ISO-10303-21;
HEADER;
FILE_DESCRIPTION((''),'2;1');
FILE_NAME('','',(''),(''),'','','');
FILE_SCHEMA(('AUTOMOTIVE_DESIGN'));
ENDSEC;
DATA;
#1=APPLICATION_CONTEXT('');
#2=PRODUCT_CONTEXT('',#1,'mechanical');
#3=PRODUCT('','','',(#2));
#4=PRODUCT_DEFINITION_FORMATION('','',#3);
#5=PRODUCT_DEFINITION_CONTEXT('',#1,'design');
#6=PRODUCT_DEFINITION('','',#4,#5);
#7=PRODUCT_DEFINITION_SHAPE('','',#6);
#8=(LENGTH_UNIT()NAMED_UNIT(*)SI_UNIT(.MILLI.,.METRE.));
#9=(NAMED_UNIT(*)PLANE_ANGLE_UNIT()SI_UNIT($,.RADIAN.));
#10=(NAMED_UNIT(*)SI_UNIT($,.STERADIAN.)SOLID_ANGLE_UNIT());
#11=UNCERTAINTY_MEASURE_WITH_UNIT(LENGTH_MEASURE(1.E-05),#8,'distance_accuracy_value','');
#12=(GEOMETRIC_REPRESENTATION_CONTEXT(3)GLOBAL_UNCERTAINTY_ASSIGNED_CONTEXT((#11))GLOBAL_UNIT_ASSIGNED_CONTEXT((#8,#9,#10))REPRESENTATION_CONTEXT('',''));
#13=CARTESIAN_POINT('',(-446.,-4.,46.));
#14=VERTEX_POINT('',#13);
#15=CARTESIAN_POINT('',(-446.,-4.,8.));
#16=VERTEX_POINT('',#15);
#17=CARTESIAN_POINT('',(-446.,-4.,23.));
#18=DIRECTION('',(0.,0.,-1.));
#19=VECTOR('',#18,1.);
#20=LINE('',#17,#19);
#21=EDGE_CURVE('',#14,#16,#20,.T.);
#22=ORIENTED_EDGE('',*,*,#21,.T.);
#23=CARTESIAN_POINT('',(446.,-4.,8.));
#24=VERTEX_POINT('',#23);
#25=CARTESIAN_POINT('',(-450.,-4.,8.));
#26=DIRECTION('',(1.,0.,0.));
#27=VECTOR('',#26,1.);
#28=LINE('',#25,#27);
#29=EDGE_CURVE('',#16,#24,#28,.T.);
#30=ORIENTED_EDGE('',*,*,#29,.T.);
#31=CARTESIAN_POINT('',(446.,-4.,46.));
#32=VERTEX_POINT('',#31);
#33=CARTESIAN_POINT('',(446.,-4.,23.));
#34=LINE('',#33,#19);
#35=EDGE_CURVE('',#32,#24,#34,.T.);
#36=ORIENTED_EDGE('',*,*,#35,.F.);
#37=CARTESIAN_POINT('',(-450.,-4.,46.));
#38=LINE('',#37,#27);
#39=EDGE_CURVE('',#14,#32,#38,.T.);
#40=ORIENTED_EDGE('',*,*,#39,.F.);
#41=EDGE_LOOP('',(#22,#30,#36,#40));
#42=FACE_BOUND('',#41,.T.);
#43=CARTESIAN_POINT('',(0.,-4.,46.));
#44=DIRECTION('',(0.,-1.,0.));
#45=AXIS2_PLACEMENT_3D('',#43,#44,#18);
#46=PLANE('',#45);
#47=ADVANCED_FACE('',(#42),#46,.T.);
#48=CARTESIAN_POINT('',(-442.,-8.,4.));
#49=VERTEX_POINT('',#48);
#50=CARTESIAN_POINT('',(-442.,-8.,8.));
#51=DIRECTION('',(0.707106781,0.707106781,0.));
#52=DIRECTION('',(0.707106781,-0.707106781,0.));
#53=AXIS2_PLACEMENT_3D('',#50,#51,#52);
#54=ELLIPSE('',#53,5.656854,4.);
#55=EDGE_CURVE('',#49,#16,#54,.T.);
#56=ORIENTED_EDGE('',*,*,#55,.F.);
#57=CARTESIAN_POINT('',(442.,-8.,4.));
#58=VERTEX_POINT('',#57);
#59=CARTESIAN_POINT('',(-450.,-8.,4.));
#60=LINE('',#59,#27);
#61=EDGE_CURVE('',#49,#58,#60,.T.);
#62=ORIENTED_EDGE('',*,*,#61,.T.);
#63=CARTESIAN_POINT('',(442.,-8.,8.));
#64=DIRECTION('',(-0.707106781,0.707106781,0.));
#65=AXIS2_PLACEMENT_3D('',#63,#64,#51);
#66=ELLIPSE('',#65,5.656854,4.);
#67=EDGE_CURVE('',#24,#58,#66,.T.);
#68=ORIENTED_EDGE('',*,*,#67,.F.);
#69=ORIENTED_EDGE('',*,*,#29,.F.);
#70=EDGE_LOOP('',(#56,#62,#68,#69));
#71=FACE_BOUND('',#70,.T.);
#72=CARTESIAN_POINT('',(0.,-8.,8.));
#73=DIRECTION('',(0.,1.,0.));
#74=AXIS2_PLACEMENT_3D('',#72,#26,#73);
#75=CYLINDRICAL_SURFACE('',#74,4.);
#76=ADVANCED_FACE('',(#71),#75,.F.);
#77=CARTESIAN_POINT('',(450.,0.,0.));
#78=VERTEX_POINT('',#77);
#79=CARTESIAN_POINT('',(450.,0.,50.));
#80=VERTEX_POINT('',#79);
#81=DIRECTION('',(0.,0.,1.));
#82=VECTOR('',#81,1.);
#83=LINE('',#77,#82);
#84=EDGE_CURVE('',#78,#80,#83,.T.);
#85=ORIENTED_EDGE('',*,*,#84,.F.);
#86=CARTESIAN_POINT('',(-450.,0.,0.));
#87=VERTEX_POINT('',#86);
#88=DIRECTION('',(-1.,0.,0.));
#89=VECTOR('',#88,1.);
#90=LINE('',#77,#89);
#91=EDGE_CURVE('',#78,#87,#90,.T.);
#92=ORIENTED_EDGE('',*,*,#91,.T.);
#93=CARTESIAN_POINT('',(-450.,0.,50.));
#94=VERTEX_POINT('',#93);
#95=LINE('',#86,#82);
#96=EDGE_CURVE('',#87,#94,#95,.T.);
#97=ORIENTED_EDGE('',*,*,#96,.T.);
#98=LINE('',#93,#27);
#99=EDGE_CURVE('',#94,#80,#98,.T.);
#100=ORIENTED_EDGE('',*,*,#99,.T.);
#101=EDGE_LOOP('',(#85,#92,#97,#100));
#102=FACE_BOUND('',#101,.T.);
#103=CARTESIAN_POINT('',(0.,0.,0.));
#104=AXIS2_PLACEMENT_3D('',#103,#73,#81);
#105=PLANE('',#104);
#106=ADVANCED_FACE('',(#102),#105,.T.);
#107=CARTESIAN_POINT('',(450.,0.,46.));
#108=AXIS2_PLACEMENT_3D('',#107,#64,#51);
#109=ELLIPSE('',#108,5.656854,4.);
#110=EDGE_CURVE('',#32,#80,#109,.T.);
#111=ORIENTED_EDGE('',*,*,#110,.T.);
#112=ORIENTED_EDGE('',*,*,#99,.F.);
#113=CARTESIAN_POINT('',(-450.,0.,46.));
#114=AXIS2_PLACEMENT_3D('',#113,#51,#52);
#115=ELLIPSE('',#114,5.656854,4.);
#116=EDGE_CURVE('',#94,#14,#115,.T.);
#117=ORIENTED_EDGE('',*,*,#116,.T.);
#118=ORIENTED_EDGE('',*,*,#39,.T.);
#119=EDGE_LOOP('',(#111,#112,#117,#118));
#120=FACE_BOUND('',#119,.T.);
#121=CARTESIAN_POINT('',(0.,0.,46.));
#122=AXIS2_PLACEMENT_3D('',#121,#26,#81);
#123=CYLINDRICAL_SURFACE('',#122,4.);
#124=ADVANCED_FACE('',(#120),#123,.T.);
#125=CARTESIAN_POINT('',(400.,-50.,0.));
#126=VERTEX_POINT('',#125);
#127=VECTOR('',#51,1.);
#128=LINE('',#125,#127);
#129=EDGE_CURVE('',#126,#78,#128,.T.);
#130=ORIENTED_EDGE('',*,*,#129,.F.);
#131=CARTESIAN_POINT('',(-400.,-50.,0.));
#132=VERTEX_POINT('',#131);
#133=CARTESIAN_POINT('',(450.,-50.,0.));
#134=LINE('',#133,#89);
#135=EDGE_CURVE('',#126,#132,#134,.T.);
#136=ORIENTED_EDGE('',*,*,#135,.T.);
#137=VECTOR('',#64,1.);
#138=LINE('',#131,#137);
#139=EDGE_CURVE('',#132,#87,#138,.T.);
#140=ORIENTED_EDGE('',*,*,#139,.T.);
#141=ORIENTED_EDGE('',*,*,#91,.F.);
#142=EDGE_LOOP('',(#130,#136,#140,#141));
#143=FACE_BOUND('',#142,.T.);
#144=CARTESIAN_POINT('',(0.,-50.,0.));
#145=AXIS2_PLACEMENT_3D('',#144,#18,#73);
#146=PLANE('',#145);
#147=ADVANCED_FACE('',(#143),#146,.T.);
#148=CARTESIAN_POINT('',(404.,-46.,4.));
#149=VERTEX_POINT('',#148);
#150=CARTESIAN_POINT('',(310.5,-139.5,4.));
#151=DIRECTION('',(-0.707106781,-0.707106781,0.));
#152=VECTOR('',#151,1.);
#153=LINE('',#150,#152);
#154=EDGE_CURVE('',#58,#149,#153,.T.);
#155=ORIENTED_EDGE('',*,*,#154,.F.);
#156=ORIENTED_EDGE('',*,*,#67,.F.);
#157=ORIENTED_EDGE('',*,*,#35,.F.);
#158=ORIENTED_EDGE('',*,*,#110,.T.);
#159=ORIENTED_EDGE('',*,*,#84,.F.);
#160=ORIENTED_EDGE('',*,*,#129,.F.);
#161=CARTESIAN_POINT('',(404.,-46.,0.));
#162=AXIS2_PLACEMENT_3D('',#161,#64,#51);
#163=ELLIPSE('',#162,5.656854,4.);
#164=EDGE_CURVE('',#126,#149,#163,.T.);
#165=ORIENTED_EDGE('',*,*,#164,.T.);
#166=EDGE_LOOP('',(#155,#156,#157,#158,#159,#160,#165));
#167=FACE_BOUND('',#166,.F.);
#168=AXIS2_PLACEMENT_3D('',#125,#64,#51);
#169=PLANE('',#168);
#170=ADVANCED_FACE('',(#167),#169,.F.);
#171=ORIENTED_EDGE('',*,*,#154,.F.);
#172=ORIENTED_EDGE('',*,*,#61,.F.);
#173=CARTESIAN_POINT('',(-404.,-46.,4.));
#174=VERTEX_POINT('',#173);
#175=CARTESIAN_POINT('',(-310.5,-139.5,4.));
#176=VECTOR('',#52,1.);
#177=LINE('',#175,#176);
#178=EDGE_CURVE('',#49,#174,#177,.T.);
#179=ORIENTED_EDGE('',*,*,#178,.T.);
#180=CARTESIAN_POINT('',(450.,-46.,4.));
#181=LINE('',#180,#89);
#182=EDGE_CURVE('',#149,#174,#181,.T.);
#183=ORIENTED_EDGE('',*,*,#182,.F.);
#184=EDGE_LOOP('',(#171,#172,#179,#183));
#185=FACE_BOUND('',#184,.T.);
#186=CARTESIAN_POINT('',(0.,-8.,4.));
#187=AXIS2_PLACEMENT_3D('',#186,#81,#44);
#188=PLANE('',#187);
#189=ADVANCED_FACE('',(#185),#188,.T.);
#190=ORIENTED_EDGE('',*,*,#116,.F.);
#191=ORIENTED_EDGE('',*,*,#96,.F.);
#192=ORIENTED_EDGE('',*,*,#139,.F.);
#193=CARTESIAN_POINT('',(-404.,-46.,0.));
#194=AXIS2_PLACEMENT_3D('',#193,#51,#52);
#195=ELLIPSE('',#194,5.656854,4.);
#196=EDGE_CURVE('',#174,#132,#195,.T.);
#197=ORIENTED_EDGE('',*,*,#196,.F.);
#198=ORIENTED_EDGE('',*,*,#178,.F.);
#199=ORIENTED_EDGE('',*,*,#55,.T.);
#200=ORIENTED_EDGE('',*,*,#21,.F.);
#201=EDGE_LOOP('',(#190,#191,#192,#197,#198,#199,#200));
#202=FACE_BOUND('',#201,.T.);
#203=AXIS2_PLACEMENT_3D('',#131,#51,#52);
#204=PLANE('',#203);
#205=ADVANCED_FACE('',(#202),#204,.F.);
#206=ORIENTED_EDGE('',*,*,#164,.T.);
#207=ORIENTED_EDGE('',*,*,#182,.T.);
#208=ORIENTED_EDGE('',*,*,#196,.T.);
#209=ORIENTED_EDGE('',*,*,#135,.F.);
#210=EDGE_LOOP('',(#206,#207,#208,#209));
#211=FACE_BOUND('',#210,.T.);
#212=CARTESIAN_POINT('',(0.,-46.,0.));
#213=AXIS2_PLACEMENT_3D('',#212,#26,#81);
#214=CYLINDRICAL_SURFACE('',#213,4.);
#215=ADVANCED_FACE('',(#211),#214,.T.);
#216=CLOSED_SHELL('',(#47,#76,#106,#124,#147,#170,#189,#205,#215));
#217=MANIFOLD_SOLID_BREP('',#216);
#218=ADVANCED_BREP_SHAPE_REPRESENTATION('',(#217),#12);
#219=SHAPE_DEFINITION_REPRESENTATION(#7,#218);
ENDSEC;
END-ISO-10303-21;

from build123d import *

# Parameters (mm, degrees)
F1_DEPTH = 450
F3_DEPTH = 50.001


# Not quite as in the source:
# - a pattern or mirror of a feature is missing from the dataset's text; its kind, count and spacing are read off the source's solid


with BuildPart() as f1:
    # F0 (on Right) → F1 (new body, symmetric)
    with BuildSketch(Plane.YZ):
        with BuildLine():
            Line((0, 0), (0, 50))
            ThreePointArc((0, 50), (-2.8284271247, 48.8284271247), (-4, 46))
            Line((-4, 46), (-4, 8))
            ThreePointArc((-4, 8), (-5.1715728753, 5.1715728753), (-8, 4))
            Line((-8, 4), (-46, 4))
            ThreePointArc((-46, 4), (-48.8284271247, 2.8284271247), (-50, 0))
            Line((-50, 0), (0, 0))
        make_face()
    extrude(amount=F1_DEPTH, both=True)

    # F2 (on face) → F3 (cut, through all)
    with BuildSketch(Plane(origin=(0, 0, 0), x_dir=(1, 0, 0), z_dir=(0, 0, -1))):
        Polygon((400, 50), (450, 0), (450, 50), align=None)
    f3 = extrude(amount=-F3_DEPTH, mode=Mode.SUBTRACT)

    # F3_copies: F3 across plane
    add(f3.mirror(Plane(origin=(0, 0, 0), x_dir=(0, 0, -1), z_dir=(-1, 0, 0))), mode=Mode.SUBTRACT)


solid = f1.part
